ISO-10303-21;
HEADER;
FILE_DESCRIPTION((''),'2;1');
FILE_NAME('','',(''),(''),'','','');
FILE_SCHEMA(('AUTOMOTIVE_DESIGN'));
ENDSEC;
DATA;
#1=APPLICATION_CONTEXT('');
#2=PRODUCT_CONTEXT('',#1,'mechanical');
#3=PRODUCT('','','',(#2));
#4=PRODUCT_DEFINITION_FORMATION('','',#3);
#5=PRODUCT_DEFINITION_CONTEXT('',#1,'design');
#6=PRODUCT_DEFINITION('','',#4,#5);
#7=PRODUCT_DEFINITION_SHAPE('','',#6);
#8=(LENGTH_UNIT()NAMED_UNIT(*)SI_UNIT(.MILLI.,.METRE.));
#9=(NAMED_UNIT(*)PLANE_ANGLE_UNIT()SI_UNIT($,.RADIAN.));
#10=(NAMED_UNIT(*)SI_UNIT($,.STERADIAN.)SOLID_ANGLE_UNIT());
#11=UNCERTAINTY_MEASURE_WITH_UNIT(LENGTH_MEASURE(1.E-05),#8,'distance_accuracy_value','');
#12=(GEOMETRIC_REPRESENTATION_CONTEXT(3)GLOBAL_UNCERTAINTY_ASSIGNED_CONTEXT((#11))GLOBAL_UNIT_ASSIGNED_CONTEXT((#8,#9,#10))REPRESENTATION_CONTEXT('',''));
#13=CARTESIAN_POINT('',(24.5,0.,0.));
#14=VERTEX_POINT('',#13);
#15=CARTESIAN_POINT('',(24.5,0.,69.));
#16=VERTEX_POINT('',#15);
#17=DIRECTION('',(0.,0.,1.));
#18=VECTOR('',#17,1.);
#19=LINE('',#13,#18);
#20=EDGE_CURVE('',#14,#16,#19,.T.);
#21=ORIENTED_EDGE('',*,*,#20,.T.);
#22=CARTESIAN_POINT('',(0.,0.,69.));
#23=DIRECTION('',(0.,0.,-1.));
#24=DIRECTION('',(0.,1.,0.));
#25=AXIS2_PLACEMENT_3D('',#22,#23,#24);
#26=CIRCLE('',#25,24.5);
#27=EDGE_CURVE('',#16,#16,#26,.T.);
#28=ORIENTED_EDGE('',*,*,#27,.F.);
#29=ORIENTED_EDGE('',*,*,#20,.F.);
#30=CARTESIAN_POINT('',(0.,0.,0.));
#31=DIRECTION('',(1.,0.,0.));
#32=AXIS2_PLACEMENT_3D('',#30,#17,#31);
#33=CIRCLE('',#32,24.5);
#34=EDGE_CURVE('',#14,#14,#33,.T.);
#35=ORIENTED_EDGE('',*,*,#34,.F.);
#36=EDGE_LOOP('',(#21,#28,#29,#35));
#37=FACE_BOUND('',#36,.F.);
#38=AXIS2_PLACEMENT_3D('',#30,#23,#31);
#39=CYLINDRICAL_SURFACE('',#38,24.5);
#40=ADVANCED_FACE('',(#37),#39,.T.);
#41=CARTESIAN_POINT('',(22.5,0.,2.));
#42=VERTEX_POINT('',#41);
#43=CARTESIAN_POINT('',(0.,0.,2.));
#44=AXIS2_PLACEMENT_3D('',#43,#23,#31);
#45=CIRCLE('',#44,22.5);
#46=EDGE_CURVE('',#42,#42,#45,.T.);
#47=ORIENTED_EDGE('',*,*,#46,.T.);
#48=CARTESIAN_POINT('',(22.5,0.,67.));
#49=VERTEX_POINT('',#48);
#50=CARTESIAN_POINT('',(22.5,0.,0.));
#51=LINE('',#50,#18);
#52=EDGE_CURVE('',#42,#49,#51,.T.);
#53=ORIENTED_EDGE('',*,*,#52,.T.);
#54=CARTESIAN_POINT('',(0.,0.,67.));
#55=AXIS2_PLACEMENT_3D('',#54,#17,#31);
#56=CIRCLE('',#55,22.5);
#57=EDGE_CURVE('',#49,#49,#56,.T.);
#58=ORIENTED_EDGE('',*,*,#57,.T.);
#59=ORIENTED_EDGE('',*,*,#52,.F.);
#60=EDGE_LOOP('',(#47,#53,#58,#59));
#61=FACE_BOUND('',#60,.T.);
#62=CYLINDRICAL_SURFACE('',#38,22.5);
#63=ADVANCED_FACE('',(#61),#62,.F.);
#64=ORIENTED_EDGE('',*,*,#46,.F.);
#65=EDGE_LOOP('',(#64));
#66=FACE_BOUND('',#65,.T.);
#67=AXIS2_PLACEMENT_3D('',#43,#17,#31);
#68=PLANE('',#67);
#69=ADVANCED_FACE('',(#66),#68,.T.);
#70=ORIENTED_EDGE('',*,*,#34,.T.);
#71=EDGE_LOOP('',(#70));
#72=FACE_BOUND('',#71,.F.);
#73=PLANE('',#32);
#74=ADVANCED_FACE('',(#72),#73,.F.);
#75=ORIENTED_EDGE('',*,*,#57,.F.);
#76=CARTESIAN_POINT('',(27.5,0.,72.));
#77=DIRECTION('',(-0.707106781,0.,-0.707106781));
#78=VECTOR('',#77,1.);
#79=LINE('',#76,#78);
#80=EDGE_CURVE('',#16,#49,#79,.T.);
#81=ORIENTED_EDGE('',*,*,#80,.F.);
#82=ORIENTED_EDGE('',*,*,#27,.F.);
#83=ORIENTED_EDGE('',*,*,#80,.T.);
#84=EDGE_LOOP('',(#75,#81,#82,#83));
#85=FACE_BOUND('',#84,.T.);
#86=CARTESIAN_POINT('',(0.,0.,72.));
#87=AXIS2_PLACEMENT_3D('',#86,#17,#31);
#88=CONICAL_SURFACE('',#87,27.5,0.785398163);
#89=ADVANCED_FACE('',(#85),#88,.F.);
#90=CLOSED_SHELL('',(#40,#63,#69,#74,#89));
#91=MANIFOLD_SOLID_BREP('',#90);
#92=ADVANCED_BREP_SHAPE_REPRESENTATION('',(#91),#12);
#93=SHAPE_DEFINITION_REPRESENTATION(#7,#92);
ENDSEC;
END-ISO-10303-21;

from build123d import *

# Parameters (mm, degrees)
F0_R     = 24.5
F1_DEPTH = 72
F2_T     = -2


# Not quite as in the source:
# - a fillet or chamfer that OpenCascade refuses, or shapes differently, is made with other operations: its cross-section is extruded or revolved along the edge and cut away or added


with BuildPart() as f1:
    # F0 (on Top) → F1 (new body)
    with BuildSketch(Plane.XY):
        Circle(F0_R)
    extrude(amount=F1_DEPTH)

    # F2
    f2_openings = [f1.faces().sort_by_distance(p)[0] for p in [
        (0, 0, 72),
    ]]
    offset(amount=F2_T, openings=f2_openings)

    # F3: chamfer of 5 on 1 edges, made by hand

    # F3_s1 → F3_t2 (revolve, cut)
    with BuildSketch(Plane.XZ):
        Polygon((27.5, 72), (22.5, 67), (22.5, 72), align=None)
    revolve(axis=Axis((0, 0, 72), (0, 0, 1)), mode=Mode.SUBTRACT)


solid = f1.part
